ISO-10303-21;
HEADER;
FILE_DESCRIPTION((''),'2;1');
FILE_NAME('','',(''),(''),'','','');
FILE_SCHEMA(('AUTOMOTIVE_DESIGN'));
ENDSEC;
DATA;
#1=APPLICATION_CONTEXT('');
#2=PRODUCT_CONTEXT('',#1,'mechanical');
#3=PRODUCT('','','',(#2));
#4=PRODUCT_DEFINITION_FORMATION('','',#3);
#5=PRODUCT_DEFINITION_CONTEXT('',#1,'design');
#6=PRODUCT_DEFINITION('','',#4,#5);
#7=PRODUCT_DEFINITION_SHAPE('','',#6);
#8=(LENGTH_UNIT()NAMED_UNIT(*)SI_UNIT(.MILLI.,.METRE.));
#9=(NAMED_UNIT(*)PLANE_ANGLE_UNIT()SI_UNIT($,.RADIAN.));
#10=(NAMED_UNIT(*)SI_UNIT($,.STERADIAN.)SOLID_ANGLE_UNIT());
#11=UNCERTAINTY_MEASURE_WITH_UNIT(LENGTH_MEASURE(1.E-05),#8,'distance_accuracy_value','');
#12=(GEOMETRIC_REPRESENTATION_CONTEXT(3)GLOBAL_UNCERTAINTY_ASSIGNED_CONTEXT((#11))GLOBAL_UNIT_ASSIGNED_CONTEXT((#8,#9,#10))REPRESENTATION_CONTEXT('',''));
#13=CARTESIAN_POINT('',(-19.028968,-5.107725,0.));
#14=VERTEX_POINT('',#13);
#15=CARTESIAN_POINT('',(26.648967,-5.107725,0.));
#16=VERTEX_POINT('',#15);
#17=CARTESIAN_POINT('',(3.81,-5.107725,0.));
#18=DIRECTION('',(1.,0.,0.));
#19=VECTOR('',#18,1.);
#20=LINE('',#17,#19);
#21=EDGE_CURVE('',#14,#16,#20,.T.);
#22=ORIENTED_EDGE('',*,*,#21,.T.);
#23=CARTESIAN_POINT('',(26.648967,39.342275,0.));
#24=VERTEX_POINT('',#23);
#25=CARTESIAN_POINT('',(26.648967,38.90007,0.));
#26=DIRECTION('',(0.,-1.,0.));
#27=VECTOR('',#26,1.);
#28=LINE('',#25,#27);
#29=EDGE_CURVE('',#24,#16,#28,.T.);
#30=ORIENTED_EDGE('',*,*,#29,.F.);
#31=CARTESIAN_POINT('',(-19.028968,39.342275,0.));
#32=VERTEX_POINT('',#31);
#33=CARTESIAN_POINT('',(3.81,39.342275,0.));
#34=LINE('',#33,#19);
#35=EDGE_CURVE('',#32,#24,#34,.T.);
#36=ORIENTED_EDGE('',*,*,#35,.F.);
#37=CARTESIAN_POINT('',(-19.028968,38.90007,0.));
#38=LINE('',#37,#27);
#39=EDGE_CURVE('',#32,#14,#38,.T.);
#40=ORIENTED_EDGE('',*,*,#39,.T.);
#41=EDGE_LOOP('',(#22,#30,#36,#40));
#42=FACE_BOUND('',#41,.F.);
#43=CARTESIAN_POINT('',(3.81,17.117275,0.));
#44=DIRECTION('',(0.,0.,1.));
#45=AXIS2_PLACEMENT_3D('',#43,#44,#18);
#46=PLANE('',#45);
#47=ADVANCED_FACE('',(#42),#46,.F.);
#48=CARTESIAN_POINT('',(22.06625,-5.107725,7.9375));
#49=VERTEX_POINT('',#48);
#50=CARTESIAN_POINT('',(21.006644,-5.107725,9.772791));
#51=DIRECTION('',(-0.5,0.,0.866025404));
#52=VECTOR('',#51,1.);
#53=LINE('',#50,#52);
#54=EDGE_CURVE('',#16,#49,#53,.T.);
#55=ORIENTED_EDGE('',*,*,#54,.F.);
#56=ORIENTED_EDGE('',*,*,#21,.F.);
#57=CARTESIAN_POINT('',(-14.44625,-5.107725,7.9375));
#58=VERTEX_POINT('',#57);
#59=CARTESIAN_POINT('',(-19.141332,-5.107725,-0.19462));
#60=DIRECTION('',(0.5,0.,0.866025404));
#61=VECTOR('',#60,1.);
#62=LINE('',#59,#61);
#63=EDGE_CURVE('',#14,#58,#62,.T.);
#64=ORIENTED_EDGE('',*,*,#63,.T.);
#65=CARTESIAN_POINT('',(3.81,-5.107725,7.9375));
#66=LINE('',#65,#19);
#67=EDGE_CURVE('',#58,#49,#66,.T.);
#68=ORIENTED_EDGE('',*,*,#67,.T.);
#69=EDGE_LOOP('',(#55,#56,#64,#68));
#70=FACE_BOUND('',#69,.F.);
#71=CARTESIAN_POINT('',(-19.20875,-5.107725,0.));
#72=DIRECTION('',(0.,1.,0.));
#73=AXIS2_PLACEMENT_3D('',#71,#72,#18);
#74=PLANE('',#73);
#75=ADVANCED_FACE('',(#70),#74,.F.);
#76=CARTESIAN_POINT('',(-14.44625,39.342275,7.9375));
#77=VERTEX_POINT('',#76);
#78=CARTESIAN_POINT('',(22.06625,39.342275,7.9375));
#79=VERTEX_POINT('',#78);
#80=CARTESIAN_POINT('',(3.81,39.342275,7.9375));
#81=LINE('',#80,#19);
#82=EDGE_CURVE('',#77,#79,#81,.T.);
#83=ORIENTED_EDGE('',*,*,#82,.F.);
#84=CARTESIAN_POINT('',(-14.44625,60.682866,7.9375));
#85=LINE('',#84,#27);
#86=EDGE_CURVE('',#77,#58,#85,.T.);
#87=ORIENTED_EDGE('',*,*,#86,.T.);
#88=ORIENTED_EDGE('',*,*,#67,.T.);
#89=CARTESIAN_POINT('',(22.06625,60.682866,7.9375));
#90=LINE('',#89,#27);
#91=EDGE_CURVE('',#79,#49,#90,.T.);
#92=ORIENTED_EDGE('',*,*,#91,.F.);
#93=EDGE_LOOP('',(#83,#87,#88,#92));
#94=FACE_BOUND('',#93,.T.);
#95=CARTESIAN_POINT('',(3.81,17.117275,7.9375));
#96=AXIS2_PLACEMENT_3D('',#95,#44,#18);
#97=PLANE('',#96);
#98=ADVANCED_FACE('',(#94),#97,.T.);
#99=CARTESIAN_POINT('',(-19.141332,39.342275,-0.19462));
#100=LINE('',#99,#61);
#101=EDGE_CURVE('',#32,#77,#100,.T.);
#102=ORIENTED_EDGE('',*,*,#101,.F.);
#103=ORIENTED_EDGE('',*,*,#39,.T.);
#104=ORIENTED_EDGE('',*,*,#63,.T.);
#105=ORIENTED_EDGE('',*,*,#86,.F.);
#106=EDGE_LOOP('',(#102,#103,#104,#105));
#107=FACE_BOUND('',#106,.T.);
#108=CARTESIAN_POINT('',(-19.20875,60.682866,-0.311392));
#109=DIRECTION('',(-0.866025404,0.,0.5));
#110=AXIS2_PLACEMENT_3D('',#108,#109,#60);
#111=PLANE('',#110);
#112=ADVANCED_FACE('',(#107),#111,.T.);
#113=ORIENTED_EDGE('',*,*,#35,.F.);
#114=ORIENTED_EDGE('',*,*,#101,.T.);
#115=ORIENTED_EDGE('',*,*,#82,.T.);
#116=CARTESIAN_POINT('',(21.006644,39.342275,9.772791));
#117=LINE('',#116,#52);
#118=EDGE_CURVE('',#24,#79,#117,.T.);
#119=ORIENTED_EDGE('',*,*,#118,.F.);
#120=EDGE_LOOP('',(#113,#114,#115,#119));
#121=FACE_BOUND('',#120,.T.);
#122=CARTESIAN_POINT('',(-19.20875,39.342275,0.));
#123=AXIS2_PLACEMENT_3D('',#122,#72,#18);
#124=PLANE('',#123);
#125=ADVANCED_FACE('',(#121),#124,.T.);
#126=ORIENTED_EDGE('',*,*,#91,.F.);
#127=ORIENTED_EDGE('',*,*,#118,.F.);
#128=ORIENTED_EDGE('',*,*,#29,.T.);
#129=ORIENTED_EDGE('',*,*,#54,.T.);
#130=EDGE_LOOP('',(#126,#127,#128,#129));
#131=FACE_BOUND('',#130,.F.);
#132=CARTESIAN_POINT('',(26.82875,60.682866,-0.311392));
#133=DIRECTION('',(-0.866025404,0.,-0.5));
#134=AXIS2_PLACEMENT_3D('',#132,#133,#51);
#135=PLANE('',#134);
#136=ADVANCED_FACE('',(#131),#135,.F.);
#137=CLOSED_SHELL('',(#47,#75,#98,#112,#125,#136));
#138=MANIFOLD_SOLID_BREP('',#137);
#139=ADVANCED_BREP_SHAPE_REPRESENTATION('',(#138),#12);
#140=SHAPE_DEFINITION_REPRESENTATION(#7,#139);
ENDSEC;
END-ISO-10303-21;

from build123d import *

# Parameters (mm, degrees)
F0_W        = 46.0375
F0_H        = 44.45
F1_DEPTH    = 7.9375
F2_T1_DEPTH = 87.1311818198


# Not quite as in the source:
# - a fillet or chamfer that OpenCascade refuses, or shapes differently, is made with other operations: its cross-section is extruded or revolved along the edge and cut away or added


with BuildPart() as f1:
    # F0 (on Top) → F1 (new body)
    with BuildSketch(Plane.XY):
        with Locations((3.8099996746, 17.1172746531)):
            Rectangle(F0_W, F0_H)
    extrude(amount=F1_DEPTH)

    # F2: chamfer of 4.7625 x 8.248891971 on 2 edges, made by hand

    # F2_s2 → F2_t1 (cut)
    with BuildSketch(Plane.XZ.offset(-60.682865563)):
        Polygon((-19.2087503254, -0.311391971), (-14.4462503254, 7.9375), (-19.2087503254, 7.9375), align=None)
        Polygon((26.8287496746, -0.311391971), (22.0662496746, 7.9375), (26.8287496746, 7.9375), align=None)
    extrude(amount=F2_T1_DEPTH, mode=Mode.SUBTRACT)


solid = f1.part
